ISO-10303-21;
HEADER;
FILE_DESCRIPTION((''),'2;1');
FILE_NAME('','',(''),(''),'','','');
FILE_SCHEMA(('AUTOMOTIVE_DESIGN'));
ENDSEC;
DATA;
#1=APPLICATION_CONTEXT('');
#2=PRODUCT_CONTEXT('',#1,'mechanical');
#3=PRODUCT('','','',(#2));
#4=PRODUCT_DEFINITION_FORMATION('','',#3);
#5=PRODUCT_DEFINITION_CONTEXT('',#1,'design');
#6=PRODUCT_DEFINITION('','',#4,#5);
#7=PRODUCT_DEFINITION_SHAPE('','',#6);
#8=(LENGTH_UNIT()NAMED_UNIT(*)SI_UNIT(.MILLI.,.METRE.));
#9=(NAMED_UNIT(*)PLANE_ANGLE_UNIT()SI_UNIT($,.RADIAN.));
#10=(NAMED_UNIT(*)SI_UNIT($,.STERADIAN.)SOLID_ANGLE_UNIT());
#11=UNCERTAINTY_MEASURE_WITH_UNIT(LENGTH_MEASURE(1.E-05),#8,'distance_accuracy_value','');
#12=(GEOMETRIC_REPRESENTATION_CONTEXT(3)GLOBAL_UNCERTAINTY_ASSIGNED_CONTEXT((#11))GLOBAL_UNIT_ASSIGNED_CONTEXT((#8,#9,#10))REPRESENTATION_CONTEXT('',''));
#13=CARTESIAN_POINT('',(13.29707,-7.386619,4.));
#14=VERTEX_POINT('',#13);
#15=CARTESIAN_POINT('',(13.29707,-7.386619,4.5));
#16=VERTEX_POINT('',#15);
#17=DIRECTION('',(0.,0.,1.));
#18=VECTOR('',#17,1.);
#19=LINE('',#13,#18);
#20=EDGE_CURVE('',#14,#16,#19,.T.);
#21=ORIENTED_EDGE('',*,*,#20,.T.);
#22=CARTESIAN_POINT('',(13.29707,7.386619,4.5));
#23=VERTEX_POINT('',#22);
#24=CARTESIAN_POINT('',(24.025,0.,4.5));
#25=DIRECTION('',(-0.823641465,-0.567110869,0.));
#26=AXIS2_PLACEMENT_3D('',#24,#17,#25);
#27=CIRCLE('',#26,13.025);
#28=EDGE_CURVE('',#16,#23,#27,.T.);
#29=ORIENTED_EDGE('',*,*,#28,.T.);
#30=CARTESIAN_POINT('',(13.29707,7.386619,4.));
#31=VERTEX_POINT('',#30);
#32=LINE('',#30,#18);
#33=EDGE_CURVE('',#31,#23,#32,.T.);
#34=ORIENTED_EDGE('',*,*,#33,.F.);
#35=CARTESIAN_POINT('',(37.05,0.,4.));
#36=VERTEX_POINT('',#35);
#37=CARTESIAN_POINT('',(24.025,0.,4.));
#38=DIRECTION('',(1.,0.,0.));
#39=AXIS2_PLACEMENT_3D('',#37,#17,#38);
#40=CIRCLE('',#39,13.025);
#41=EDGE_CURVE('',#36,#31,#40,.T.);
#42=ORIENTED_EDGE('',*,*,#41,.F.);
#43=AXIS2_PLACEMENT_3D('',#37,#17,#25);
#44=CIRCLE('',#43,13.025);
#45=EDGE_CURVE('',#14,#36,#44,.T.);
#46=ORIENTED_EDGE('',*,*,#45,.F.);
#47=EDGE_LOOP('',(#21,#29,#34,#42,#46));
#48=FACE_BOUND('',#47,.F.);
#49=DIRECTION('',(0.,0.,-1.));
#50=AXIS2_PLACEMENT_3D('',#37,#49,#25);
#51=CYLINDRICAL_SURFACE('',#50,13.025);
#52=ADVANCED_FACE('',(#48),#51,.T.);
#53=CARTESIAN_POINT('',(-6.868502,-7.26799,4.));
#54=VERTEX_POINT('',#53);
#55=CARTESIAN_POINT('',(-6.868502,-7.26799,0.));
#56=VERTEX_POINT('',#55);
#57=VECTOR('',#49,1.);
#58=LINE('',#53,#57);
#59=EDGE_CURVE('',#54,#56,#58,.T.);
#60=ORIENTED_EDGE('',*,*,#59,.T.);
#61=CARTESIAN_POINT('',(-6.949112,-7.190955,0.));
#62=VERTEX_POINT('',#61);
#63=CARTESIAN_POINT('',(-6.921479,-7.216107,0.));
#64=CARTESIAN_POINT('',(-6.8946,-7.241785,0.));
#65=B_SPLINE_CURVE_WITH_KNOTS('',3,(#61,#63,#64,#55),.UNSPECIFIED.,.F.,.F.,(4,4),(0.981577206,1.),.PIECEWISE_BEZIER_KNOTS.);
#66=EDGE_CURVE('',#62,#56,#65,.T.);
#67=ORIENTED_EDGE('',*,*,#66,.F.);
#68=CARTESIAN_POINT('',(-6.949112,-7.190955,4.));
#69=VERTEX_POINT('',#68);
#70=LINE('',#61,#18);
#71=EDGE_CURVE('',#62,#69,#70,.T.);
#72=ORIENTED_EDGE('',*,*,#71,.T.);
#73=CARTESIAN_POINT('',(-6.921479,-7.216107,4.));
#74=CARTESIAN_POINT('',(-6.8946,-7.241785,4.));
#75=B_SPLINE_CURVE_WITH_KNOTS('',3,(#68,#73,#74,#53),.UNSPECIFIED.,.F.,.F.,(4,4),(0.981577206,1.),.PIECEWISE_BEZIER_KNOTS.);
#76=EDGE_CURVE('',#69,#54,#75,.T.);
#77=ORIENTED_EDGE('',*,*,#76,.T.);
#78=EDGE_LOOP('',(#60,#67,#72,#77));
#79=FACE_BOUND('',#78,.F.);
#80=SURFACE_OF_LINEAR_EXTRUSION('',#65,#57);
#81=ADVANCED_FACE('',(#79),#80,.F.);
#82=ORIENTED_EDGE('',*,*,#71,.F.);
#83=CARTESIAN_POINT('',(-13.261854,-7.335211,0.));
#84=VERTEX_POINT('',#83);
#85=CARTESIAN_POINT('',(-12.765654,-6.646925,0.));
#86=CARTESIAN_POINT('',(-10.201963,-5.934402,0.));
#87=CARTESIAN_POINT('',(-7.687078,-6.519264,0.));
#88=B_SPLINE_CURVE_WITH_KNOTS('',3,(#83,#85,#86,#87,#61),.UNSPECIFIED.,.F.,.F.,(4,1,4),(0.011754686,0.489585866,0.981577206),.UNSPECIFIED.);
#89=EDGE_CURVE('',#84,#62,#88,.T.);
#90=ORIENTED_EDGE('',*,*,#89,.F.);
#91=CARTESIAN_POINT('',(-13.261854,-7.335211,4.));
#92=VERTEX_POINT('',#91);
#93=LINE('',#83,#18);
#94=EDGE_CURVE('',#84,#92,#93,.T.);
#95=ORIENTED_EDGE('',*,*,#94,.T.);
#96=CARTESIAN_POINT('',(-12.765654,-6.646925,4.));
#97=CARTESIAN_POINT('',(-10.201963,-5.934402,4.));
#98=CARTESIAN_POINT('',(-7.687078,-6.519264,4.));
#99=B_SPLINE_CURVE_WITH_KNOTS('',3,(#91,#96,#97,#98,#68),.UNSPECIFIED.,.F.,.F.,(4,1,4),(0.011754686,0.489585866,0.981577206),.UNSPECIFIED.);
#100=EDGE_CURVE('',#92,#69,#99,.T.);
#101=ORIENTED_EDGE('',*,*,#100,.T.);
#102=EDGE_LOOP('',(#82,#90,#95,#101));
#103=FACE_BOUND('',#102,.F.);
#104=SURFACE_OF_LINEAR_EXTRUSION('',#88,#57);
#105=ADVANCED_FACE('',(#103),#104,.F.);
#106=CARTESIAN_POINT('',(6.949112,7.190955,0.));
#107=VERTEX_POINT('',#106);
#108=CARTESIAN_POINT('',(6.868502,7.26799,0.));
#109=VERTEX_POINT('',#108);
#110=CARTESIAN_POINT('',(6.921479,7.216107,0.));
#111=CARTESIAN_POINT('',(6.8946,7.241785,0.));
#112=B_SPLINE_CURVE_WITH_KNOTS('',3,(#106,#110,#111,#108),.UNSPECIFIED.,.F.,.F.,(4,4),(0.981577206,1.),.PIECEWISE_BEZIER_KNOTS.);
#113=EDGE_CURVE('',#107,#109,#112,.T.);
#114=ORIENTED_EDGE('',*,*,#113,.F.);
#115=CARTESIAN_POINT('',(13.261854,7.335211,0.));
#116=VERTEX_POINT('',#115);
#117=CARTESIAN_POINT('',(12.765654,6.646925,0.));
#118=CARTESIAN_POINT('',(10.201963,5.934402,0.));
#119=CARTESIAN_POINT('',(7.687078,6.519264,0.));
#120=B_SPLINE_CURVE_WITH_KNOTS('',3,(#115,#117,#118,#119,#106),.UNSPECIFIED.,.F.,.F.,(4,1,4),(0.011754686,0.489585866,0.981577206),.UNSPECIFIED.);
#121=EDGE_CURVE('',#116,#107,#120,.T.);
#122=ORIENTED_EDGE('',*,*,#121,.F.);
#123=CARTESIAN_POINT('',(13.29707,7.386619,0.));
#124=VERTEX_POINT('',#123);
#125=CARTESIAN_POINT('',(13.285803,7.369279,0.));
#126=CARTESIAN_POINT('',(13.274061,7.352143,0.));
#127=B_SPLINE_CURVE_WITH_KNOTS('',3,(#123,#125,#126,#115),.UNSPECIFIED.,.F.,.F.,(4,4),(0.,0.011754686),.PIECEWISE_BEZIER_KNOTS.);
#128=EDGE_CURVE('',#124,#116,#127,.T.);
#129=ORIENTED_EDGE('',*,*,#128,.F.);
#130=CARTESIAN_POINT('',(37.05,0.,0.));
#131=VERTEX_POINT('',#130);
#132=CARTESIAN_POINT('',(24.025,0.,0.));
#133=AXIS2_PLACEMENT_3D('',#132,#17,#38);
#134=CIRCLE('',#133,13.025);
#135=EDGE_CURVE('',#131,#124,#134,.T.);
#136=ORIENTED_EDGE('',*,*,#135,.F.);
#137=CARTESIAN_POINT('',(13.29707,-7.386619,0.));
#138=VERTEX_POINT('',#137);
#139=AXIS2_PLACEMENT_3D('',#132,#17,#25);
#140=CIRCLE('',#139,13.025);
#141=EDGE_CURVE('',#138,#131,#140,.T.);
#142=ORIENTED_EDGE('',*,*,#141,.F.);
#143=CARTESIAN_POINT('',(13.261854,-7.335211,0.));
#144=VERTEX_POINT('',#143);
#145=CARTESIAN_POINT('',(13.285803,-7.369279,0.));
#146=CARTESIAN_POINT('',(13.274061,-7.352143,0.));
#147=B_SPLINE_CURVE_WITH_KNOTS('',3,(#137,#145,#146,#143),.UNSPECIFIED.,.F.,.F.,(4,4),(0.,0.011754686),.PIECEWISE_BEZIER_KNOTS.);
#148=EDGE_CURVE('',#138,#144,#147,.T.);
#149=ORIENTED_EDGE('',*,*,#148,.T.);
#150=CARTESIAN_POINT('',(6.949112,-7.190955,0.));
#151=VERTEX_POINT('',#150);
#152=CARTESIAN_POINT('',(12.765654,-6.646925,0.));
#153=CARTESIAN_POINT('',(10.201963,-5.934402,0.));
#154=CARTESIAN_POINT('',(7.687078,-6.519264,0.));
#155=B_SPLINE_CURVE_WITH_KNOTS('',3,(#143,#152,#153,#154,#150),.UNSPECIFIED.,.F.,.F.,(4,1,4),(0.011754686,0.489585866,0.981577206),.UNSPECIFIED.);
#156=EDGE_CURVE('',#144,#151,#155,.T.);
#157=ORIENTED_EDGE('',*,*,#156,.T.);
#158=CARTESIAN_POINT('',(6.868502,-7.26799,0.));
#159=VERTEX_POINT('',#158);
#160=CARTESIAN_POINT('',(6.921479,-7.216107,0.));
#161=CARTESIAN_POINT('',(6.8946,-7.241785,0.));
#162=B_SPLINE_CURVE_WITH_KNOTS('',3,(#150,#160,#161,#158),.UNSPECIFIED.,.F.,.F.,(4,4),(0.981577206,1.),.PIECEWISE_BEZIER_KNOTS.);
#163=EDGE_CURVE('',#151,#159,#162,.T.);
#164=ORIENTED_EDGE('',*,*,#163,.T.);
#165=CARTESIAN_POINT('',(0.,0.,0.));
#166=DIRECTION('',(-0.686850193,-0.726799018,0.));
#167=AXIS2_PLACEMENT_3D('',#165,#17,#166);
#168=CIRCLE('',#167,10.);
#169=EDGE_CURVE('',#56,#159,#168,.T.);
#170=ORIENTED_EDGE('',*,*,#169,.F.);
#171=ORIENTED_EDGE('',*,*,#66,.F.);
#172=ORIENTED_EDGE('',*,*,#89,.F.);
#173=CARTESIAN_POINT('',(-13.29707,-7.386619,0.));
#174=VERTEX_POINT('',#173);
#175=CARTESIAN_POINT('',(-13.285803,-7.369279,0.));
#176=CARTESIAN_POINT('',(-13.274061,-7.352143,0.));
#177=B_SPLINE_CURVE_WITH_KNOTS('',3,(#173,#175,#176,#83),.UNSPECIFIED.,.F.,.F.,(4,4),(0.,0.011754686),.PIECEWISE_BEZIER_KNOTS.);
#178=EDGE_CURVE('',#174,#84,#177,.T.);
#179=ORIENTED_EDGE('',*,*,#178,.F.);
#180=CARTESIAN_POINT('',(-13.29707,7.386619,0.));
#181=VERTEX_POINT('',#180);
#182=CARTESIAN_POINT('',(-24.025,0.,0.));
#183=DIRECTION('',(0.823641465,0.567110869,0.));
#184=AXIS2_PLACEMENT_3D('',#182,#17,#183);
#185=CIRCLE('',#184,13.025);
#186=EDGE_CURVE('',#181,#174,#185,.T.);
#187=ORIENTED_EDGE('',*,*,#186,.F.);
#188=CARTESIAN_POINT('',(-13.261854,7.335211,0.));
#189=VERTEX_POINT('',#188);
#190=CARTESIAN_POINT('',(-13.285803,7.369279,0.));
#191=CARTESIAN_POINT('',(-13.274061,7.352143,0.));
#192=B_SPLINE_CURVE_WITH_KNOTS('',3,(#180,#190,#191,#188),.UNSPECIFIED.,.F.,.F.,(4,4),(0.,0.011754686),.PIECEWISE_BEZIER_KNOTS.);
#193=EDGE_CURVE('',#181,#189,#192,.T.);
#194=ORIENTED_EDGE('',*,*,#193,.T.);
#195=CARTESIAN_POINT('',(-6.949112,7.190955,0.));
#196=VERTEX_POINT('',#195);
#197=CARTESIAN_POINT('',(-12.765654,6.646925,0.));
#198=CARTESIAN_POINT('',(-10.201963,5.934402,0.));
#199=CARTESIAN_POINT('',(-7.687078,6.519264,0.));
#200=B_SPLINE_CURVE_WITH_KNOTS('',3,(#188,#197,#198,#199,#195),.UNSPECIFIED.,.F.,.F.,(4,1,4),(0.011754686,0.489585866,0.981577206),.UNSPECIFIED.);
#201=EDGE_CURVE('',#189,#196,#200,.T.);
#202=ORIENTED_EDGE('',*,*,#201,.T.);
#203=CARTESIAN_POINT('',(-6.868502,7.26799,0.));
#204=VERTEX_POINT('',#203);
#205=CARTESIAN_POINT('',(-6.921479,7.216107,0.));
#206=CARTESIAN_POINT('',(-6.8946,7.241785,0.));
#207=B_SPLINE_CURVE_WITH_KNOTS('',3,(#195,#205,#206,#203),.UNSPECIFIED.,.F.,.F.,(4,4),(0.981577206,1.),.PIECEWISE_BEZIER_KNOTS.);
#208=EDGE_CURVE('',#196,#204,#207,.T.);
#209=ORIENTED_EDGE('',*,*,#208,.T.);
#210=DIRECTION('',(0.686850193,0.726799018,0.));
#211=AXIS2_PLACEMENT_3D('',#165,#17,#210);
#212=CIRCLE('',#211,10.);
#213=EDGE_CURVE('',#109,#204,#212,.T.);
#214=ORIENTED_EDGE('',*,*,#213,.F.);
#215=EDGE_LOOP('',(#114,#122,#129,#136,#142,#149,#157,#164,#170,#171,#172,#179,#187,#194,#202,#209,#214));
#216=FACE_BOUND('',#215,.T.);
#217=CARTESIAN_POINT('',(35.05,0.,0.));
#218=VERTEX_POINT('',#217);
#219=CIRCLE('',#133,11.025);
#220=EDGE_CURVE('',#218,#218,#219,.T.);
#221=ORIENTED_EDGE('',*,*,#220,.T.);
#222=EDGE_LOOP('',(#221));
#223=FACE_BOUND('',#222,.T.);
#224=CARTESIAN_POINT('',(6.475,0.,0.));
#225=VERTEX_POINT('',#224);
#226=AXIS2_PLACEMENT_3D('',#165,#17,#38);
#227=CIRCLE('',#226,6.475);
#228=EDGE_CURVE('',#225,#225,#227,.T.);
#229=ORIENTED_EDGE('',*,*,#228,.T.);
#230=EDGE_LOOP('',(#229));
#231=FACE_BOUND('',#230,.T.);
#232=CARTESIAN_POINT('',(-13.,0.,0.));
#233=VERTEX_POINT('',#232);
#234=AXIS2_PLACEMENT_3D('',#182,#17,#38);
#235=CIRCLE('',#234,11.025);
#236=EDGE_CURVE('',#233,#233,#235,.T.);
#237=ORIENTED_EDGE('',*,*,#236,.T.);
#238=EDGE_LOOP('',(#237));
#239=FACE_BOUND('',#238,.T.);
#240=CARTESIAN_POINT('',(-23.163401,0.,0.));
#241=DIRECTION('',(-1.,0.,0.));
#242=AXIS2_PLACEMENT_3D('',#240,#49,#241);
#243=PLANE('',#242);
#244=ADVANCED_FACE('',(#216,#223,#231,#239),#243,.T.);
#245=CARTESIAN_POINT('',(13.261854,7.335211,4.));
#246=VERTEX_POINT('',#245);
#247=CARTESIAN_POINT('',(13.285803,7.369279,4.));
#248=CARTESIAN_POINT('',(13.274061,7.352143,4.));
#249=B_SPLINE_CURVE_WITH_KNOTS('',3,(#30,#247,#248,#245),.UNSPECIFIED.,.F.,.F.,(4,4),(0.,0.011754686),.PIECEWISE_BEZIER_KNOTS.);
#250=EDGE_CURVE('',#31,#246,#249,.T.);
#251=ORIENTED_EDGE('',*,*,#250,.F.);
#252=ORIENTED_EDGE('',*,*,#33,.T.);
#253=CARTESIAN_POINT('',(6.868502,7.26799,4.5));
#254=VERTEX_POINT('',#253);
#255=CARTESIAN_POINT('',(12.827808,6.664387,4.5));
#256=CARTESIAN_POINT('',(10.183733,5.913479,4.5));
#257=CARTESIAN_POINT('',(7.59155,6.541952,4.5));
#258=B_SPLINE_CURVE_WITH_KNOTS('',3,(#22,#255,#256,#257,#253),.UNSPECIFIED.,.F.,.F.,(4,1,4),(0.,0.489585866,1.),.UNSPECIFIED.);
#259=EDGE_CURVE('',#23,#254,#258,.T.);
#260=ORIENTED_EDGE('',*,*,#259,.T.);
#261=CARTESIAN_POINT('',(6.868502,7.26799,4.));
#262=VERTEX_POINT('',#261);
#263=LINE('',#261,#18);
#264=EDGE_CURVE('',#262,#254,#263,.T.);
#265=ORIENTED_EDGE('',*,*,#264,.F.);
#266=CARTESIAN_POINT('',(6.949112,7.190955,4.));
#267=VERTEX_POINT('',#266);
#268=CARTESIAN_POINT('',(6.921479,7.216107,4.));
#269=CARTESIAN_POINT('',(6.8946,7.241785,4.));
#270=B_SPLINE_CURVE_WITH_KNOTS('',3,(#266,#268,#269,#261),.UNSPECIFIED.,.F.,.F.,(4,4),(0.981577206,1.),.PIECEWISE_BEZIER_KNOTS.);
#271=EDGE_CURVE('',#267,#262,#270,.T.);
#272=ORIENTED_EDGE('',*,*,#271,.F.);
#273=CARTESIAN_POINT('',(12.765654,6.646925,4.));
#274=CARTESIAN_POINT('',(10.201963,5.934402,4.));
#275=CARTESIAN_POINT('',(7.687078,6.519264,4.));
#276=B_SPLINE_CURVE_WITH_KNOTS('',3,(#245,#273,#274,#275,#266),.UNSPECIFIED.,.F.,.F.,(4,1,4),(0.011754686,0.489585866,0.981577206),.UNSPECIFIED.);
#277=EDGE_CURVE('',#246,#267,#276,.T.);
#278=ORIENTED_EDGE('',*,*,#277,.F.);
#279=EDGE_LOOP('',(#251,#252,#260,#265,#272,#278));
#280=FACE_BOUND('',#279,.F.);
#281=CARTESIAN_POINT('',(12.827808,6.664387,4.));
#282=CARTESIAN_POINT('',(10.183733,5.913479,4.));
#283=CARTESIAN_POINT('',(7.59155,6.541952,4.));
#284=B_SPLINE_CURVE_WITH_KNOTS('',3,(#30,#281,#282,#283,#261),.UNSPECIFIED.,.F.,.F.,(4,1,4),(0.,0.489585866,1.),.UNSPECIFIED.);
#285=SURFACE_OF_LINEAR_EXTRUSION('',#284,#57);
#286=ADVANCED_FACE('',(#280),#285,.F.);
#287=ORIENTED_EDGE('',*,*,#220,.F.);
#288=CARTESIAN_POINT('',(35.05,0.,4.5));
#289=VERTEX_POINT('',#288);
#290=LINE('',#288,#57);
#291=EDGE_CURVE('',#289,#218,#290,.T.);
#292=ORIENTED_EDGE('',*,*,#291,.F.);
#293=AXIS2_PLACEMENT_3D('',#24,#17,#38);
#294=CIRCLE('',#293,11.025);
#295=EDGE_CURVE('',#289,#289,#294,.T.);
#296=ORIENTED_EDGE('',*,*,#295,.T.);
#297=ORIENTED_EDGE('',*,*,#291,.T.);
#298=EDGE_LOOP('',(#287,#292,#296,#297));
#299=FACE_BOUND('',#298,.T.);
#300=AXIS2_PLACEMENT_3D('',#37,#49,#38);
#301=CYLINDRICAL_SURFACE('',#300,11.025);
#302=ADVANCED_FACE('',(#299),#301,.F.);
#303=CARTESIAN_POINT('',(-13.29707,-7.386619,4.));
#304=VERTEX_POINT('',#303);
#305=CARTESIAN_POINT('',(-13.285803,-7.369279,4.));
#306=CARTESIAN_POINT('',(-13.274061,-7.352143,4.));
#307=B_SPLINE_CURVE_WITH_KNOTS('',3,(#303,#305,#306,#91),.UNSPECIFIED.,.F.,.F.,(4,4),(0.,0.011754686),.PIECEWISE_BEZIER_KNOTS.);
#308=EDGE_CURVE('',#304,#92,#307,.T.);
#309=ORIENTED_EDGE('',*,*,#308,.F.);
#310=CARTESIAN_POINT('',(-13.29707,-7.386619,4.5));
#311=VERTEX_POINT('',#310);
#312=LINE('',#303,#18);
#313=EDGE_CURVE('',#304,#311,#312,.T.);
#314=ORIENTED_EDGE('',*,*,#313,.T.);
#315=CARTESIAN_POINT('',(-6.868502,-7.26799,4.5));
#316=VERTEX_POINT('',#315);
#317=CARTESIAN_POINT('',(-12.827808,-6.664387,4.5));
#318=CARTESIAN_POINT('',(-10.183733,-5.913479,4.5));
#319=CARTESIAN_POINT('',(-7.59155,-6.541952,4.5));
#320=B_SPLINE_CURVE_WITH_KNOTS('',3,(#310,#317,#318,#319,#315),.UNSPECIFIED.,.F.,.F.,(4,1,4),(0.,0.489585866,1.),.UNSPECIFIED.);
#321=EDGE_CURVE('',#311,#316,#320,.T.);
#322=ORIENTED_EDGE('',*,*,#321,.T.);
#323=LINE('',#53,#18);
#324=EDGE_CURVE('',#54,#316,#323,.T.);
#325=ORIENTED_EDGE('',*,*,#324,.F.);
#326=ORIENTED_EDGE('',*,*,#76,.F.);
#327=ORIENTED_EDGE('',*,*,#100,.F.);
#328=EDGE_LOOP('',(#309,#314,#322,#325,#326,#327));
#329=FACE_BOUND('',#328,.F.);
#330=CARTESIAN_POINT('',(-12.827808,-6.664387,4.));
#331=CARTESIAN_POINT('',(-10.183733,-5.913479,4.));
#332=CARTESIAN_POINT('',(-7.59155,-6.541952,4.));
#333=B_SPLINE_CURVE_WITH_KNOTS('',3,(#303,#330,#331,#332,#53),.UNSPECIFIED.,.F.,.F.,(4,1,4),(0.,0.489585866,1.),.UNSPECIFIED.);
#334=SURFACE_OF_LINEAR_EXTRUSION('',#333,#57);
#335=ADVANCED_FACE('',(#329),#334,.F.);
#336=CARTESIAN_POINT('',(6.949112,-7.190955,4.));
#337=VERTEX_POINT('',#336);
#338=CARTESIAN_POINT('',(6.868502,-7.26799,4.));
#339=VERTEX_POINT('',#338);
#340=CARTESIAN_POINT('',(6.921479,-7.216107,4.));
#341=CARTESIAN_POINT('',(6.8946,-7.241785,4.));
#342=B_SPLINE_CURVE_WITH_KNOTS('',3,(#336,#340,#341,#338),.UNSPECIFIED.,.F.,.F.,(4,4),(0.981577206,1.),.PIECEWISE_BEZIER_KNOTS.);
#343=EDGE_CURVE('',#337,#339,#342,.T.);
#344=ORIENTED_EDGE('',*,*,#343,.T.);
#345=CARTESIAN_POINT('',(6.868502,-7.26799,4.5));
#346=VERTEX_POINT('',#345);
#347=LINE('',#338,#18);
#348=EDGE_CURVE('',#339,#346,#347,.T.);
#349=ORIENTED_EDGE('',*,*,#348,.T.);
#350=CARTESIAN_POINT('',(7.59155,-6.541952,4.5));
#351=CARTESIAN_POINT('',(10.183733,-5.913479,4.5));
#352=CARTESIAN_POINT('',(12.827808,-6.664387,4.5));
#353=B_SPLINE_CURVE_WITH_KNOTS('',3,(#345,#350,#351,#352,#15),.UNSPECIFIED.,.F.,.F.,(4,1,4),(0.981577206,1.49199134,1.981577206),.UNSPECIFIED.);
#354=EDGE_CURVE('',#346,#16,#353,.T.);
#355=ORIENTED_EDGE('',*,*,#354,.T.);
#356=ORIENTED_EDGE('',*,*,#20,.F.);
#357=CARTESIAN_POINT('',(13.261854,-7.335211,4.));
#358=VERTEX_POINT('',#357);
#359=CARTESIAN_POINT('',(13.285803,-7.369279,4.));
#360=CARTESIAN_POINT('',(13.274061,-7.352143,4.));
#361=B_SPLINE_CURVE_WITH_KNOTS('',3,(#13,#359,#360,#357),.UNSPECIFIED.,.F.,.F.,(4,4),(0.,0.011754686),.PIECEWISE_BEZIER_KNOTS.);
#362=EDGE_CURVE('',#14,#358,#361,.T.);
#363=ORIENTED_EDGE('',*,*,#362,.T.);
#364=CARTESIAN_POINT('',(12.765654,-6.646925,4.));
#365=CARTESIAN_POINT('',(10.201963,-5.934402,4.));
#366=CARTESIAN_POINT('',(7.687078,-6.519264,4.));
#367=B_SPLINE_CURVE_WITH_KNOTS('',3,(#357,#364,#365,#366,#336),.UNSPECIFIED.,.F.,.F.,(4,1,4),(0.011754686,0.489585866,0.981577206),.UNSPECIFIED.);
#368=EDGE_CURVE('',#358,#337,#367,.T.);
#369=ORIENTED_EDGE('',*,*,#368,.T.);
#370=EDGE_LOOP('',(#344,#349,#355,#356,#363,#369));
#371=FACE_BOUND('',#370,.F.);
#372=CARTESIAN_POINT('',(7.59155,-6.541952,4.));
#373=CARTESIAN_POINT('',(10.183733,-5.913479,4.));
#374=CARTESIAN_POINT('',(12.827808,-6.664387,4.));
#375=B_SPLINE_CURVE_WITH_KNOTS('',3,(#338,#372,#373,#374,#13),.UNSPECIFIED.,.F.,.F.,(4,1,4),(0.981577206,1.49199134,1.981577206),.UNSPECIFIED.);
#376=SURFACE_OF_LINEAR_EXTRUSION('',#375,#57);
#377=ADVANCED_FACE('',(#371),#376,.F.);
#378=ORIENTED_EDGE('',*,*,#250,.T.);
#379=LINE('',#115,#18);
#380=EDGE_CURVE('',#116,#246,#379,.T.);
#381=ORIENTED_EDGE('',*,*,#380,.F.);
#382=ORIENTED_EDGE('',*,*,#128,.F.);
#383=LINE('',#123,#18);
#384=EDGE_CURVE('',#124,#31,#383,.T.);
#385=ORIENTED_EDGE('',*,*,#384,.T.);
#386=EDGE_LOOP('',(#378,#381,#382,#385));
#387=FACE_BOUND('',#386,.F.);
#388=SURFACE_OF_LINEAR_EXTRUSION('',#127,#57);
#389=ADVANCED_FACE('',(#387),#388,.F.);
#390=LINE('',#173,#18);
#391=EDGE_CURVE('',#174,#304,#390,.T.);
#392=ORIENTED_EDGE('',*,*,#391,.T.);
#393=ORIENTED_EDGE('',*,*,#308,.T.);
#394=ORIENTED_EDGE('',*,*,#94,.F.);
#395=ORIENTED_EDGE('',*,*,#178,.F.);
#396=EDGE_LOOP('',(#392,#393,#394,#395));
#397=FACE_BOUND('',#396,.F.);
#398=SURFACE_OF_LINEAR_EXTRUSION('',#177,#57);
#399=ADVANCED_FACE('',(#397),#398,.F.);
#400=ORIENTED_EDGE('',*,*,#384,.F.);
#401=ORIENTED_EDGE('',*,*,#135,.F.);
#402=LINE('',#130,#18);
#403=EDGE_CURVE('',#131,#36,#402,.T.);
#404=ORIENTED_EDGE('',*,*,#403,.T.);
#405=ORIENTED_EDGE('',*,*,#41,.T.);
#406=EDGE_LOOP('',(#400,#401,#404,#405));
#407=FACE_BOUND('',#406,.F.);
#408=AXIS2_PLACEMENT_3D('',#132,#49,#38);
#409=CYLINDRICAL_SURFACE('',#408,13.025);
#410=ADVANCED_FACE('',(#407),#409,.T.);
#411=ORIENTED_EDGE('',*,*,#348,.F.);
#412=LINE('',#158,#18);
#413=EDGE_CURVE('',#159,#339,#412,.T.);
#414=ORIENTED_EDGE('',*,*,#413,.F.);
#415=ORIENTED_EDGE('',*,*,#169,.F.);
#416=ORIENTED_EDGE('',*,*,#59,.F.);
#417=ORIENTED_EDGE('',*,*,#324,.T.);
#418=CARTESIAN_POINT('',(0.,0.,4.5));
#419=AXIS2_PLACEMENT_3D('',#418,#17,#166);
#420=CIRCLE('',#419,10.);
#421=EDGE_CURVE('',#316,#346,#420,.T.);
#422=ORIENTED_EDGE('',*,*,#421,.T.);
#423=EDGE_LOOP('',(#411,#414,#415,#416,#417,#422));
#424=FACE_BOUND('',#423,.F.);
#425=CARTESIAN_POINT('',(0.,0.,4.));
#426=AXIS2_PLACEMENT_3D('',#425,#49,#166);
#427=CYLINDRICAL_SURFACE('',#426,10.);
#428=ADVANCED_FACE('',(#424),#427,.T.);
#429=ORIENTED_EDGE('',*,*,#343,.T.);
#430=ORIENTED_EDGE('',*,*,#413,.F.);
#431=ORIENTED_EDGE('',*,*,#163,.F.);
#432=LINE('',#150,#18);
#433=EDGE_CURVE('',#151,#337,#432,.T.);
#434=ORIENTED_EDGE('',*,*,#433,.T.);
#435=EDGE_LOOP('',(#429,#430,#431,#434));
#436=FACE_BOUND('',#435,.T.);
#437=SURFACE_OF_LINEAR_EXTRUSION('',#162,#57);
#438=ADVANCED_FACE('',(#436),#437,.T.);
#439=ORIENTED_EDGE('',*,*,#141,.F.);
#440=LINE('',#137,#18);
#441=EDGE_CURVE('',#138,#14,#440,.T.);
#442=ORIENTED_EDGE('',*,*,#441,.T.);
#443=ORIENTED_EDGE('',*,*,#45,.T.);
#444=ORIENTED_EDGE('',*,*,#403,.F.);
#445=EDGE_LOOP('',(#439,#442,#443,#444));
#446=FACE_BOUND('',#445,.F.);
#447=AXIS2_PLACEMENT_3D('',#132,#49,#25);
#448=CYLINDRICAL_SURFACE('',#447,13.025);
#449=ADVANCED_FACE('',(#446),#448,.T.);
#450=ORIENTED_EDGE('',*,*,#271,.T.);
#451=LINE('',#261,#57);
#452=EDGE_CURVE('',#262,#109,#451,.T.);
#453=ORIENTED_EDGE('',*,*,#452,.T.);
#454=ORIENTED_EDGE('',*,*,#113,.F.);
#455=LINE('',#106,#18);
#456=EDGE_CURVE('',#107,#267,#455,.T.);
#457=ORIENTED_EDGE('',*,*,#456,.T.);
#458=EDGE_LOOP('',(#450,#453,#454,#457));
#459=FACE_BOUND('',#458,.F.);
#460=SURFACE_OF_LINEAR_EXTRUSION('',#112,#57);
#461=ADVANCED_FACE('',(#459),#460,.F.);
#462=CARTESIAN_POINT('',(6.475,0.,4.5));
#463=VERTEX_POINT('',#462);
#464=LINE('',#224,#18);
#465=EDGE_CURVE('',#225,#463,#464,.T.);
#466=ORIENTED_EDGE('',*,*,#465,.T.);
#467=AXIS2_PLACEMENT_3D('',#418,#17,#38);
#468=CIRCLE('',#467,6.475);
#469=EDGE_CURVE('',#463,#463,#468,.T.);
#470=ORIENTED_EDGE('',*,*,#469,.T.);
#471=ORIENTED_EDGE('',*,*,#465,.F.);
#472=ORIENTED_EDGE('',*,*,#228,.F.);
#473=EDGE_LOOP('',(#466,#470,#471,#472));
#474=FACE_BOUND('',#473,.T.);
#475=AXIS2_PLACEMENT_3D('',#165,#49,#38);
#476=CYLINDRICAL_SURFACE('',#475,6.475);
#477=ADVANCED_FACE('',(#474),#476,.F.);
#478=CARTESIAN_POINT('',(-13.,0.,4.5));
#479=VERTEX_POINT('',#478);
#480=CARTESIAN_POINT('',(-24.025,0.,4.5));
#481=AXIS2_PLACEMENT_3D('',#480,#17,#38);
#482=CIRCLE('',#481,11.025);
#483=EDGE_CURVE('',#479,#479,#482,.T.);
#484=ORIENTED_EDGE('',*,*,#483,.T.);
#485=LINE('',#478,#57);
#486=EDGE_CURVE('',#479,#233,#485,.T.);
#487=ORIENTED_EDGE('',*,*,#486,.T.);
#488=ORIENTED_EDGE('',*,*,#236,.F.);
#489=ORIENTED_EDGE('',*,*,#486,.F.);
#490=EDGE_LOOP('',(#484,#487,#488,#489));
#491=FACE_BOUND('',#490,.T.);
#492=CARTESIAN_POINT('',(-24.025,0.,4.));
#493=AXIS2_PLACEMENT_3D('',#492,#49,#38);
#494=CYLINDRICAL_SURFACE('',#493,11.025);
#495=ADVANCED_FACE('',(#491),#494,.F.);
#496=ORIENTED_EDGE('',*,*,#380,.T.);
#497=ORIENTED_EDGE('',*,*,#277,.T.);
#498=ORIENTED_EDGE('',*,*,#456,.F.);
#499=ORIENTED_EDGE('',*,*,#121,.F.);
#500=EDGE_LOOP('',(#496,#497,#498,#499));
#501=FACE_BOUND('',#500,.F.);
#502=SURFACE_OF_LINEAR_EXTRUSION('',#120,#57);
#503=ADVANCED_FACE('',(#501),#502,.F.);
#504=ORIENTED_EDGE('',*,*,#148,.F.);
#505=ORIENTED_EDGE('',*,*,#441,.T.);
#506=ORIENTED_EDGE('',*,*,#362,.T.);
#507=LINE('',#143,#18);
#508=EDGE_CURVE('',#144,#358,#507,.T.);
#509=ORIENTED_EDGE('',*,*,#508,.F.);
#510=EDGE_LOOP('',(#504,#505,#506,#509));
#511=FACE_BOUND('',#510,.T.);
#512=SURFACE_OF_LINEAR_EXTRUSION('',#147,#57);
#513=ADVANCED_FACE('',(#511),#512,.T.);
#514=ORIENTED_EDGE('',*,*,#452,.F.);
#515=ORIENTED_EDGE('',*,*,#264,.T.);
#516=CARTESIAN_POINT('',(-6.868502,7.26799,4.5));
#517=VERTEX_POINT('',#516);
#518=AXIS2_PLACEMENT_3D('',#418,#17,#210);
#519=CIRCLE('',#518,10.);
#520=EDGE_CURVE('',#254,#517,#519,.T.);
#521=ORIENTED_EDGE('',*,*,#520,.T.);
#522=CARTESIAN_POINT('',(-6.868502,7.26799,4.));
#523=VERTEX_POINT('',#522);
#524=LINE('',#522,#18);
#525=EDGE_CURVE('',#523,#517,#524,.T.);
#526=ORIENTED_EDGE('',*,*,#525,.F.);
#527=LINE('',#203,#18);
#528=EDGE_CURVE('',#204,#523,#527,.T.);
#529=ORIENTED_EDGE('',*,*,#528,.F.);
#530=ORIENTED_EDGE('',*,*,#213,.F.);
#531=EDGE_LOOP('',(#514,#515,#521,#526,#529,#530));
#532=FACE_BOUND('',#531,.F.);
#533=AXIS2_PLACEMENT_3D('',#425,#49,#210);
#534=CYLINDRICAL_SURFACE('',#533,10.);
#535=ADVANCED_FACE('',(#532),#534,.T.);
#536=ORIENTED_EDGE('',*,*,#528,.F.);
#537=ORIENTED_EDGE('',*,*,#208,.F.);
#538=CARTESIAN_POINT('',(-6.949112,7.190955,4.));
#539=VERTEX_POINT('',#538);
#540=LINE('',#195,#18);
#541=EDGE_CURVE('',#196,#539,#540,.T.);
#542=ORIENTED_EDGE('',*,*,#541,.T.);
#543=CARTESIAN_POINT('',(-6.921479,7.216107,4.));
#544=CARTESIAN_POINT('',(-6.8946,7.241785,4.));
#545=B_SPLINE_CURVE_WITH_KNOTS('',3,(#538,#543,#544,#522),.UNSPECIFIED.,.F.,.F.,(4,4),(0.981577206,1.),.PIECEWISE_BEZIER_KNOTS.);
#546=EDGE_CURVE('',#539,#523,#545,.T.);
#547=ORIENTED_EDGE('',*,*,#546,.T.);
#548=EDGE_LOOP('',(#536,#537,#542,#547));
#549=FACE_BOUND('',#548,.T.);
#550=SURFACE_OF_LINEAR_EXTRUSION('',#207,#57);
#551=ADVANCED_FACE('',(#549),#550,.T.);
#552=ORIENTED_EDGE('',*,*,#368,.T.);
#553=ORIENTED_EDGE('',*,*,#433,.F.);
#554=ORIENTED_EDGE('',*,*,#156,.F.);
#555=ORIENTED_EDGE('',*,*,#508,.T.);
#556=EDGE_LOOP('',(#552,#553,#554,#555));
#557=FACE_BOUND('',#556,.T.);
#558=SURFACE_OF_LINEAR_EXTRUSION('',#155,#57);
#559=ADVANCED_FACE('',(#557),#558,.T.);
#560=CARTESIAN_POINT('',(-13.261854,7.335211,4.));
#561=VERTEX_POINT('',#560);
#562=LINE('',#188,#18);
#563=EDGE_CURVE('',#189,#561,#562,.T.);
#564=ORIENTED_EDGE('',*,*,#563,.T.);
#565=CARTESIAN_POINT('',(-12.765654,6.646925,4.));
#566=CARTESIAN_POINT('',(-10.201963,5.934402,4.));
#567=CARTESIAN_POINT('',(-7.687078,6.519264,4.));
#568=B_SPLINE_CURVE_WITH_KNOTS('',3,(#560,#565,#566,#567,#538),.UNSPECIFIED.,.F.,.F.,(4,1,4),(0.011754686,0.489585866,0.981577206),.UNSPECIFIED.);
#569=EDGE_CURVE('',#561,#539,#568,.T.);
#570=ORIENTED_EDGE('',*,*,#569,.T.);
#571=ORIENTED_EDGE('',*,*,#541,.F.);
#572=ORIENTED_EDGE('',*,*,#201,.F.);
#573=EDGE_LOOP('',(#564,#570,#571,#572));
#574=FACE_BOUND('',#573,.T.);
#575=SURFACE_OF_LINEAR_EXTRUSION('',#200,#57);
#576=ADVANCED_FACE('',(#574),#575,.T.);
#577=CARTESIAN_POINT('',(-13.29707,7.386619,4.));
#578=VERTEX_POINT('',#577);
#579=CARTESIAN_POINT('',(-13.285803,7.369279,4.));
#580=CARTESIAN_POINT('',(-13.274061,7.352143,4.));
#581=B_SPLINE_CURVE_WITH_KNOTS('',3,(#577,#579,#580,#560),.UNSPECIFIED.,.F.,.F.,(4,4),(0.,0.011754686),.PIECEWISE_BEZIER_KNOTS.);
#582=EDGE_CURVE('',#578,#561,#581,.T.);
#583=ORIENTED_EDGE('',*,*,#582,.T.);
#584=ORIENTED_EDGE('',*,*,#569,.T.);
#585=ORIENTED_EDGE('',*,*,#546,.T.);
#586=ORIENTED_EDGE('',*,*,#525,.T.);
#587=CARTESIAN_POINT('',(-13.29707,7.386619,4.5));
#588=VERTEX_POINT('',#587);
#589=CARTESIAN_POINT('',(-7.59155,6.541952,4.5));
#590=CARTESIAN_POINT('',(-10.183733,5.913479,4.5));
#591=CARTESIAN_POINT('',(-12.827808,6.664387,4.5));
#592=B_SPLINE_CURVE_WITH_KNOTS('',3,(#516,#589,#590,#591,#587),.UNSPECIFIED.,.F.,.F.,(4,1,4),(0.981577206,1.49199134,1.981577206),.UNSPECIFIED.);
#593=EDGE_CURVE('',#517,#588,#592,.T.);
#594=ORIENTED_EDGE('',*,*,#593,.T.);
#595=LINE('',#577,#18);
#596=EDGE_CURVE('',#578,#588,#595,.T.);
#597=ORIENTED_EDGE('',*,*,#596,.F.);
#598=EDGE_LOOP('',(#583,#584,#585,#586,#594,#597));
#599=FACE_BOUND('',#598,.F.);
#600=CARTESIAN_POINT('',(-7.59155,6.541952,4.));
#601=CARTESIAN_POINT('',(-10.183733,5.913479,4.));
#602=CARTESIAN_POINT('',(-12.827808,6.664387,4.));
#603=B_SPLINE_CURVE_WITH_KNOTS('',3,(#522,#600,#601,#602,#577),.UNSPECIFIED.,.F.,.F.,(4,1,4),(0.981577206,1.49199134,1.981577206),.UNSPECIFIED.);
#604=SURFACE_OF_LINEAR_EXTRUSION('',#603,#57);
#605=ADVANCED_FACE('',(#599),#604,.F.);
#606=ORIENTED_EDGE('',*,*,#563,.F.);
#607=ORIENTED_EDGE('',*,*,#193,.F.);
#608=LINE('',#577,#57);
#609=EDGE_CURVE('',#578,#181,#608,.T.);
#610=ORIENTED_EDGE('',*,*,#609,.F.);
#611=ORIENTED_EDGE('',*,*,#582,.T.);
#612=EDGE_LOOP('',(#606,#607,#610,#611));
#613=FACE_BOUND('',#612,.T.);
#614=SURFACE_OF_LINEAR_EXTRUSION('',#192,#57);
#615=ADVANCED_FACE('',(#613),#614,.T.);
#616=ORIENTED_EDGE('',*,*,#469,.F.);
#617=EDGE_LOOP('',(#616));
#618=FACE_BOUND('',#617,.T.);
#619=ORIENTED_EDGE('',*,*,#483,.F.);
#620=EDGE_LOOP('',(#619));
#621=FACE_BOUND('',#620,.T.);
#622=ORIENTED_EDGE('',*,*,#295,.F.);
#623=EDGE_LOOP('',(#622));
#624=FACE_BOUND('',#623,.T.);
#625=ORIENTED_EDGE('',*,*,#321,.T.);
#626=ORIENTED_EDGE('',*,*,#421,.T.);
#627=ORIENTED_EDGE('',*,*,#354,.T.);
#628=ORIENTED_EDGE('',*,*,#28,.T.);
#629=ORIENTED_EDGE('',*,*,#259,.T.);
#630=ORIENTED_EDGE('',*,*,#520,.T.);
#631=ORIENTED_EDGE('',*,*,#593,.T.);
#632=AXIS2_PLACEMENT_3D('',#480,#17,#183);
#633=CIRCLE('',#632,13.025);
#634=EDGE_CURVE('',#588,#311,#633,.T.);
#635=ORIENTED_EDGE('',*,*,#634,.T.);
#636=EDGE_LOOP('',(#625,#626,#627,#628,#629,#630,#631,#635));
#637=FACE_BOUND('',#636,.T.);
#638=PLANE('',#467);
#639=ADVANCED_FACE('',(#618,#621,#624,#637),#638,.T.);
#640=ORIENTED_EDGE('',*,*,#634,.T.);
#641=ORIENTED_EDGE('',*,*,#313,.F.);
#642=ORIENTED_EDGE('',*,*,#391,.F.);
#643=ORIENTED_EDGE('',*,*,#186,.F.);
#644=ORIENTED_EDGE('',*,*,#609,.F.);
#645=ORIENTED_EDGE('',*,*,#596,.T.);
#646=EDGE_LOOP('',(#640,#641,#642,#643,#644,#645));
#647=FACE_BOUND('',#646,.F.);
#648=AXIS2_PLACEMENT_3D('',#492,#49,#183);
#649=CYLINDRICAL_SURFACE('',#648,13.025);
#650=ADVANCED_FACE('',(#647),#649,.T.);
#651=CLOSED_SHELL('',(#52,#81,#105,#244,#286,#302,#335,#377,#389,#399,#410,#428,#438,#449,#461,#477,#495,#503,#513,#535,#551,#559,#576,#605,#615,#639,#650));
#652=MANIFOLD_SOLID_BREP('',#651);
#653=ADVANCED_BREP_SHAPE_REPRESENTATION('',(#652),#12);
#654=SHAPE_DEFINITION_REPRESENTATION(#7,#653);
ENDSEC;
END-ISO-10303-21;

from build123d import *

# Parameters (mm, degrees)
F0_R        = 11.025
F0_R_2      = 8
F0_R_3      = 6.475
F1_DEPTH    = 4
F2_DEPTH    = 4.5
F1_FACE_R   = 11.025
F1_FACE_R_2 = 8
F3_DEPTH    = 0.5


# Not quite as in the source:
# - a feature names something its author has since deleted; it is built from what else it names


with BuildPart() as f1:
    # F0 (on Top) → F1 (new body)
    with BuildSketch(Plane.XY):
        with BuildLine():
            add(Edge.make_bspline(
                [(-13.2970699227, 7.3866190681), (-13.2858031983, 7.3692786835), (-13.2740607617, 7.352142708), (-13.2618542065, 7.3352108101)],
                knots=[0, 0, 0, 0, 0.0117546856, 0.0117546856, 0.0117546856, 0.0117546856], degree=3))
            ThreePointArc((-13.2970699227, 7.3866190681), (-37.05, 0), (-13.2970699227, -7.3866190681))
            add(Edge.make_bspline(
                [(-13.2970699227, -7.3866190681), (-13.2858031983, -7.3692786835), (-13.2740607617, -7.352142708), (-13.2618542065, -7.3352108101)],
                knots=[0, 0, 0, 0, 0.0117546856, 0.0117546856, 0.0117546856, 0.0117546856], degree=3))
            ThreePointArc((-13.2618542065, -7.3352108101), (-11.5783016635, -3.8380106201), (-11, 0))
            ThreePointArc((-11, 0), (-11.5783016635, 3.8380106201), (-13.2618542065, 7.3352108101))
        make_face()
        with Locations((-24.025, 0)):
            Circle(F0_R, mode=Mode.SUBTRACT)
        with BuildLine():
            add(Edge.make_bspline(
                [(13.2970699227, 7.3866190681), (13.2858031983, 7.3692786835), (13.2740607617, 7.352142708), (13.2618542065, 7.3352108101)],
                knots=[0, 0, 0, 0, 0.0117546856, 0.0117546856, 0.0117546856, 0.0117546856], degree=3))
            ThreePointArc((13.2618542065, 7.3352108101), (11, 0), (13.2618542065, -7.3352108101))
            add(Edge.make_bspline(
                [(13.2970699227, -7.3866190681), (13.2858031983, -7.3692786835), (13.2740607617, -7.352142708), (13.2618542065, -7.3352108101)],
                knots=[0, 0, 0, 0, 0.0117546856, 0.0117546856, 0.0117546856, 0.0117546856], degree=3))
            ThreePointArc((13.2970699227, -7.3866190681), (27.8927729861, -12.4374819448), (37.05, 0))
            ThreePointArc((37.05, 0), (27.8927729861, 12.4374819448), (13.2970699227, 7.3866190681))
        make_face()
        with Locations((24.025, 0)):
            Circle(F0_R, mode=Mode.SUBTRACT)
        with BuildLine():
            add(Edge.make_bspline(
                [(-6.9491121946, 7.1909554099), (-6.9214787847, 7.2161071506), (-6.8945995038, 7.2417846871), (-6.8685019311, 7.2679901776)],
                knots=[0.9815772058, 0.9815772058, 0.9815772058, 0.9815772058, 1, 1, 1, 1], degree=3))
            ThreePointArc((-6.9491121946, 7.1909554099), (-10, 0), (-6.9491121946, -7.1909554099))
            add(Edge.make_bspline(
                [(-6.9491121946, -7.1909554099), (-6.9214787847, -7.2161071506), (-6.8945995038, -7.2417846871), (-6.8685019311, -7.2679901776)],
                knots=[0.9815772058, 0.9815772058, 0.9815772058, 0.9815772058, 1, 1, 1, 1], degree=3))
            ThreePointArc((-6.8685019311, -7.2679901776), (0, -10), (6.8685019311, -7.2679901776))
            add(Edge.make_bspline(
                [(6.9491121946, -7.1909554099), (6.9214787847, -7.2161071506), (6.8945995038, -7.2417846871), (6.8685019311, -7.2679901776)],
                knots=[0.9815772058, 0.9815772058, 0.9815772058, 0.9815772058, 1, 1, 1, 1], degree=3))
            ThreePointArc((6.9491121946, -7.1909554099), (9.2057352217, -3.9056931558), (10, 0))
            ThreePointArc((10, 0), (9.2057352217, 3.9056931558), (6.9491121946, 7.1909554099))
            add(Edge.make_bspline(
                [(6.9491121946, 7.1909554099), (6.9214787847, 7.2161071506), (6.8945995038, 7.2417846871), (6.8685019311, 7.2679901776)],
                knots=[0.9815772058, 0.9815772058, 0.9815772058, 0.9815772058, 1, 1, 1, 1], degree=3))
            ThreePointArc((6.8685019311, 7.2679901776), (0, 10), (-6.8685019311, 7.2679901776))
        make_face()
        Circle(F0_R_2, mode=Mode.SUBTRACT)
        Circle(F0_R_2)
        Circle(F0_R_3, mode=Mode.SUBTRACT)
        with BuildLine():
            add(Edge.make_bspline(
                [(-13.2618542065, 7.3352108101), (-12.765654406, 6.6469245328), (-10.2019626219, 5.934402015), (-7.687078337, 6.5192636743), (-6.9491121946, 7.1909554099)],
                knots=[0.0117546856, 0.0117546856, 0.0117546856, 0.0117546856, 0.4895858662, 0.9815772058, 0.9815772058, 0.9815772058, 0.9815772058], degree=3))
            ThreePointArc((-13.2618542065, 7.3352108101), (-11.5783016635, 3.8380106201), (-11, 0))
            ThreePointArc((-11, 0), (-11.5783016635, -3.8380106201), (-13.2618542065, -7.3352108101))
            add(Edge.make_bspline(
                [(-13.2618542065, -7.3352108101), (-12.765654406, -6.6469245328), (-10.2019626219, -5.934402015), (-7.687078337, -6.5192636743), (-6.9491121946, -7.1909554099)],
                knots=[0.0117546856, 0.0117546856, 0.0117546856, 0.0117546856, 0.4895858662, 0.9815772058, 0.9815772058, 0.9815772058, 0.9815772058], degree=3))
            ThreePointArc((-6.9491121946, -7.1909554099), (-10, 0), (-6.9491121946, 7.1909554099))
        make_face()
        with BuildLine():
            add(Edge.make_bspline(
                [(13.2618542065, 7.3352108101), (12.765654406, 6.6469245328), (10.2019626219, 5.934402015), (7.687078337, 6.5192636743), (6.9491121946, 7.1909554099)],
                knots=[0.0117546856, 0.0117546856, 0.0117546856, 0.0117546856, 0.4895858662, 0.9815772058, 0.9815772058, 0.9815772058, 0.9815772058], degree=3))
            ThreePointArc((6.9491121946, 7.1909554099), (9.2057352217, 3.9056931558), (10, 0))
            ThreePointArc((10, 0), (9.2057352217, -3.9056931558), (6.9491121946, -7.1909554099))
            add(Edge.make_bspline(
                [(13.2618542065, -7.3352108101), (12.765654406, -6.6469245328), (10.2019626219, -5.934402015), (7.687078337, -6.5192636743), (6.9491121946, -7.1909554099)],
                knots=[0.0117546856, 0.0117546856, 0.0117546856, 0.0117546856, 0.4895858662, 0.9815772058, 0.9815772058, 0.9815772058, 0.9815772058], degree=3))
            ThreePointArc((13.2618542065, -7.3352108101), (11, 0), (13.2618542065, 7.3352108101))
        make_face()
    extrude(amount=F1_DEPTH)

    # F0 (on Top) → F2 (join)
    with BuildSketch(Plane.XY):
        Circle(F0_R_2)
        Circle(F0_R_3, mode=Mode.SUBTRACT)
    extrude(amount=F2_DEPTH)

    # F1_face (on face) + F0 (on Top) → F3 (join, through all)
    with BuildSketch(Plane.XY.offset(4)):
        with BuildLine():
            ThreePointArc((-6.8685019311, -7.2679901776), (0, -10), (6.8685019311, -7.2679901776))
            add(Edge.make_bspline(
                [(6.8685019311, -7.2679901776), (7.591550229, -6.5419519543), (10.1837329047, -5.9134794065), (12.8278077735, -6.6643873129), (13.2970699227, -7.3866190681)],
                knots=[0.9815772058, 0.9815772058, 0.9815772058, 0.9815772058, 1.4919913396, 1.9815772058, 1.9815772058, 1.9815772058, 1.9815772058], degree=3))
            ThreePointArc((13.2970699227, -7.3866190681), (37.05, 0), (13.2970699227, 7.3866190681))
            add(Edge.make_bspline(
                [(13.2970699227, 7.3866190681), (12.8278077735, 6.6643873129), (10.1837329047, 5.9134794065), (7.591550229, 6.5419519543), (6.8685019311, 7.2679901776)],
                knots=[0, 0, 0, 0, 0.4895858662, 1, 1, 1, 1], degree=3))
            ThreePointArc((6.8685019311, 7.2679901776), (0, 10), (-6.8685019311, 7.2679901776))
            add(Edge.make_bspline(
                [(-6.8685019311, 7.2679901776), (-7.591550229, 6.5419519543), (-10.1837329047, 5.9134794066), (-12.8278077735, 6.6643873129), (-13.2970699227, 7.3866190681)],
                knots=[0.9815772058, 0.9815772058, 0.9815772058, 0.9815772058, 1.4919913396, 1.9815772058, 1.9815772058, 1.9815772058, 1.9815772058], degree=3))
            ThreePointArc((-13.2970699227, 7.3866190681), (-37.05, 0), (-13.2970699227, -7.3866190681))
            add(Edge.make_bspline(
                [(-13.2970699227, -7.3866190681), (-12.8278077735, -6.6643873129), (-10.1837329047, -5.9134794065), (-7.591550229, -6.5419519543), (-6.8685019311, -7.2679901776)],
                knots=[0, 0, 0, 0, 0.4895858662, 1, 1, 1, 1], degree=3))
        make_face()
        with Locations((-24.025, 0)):
            Circle(F1_FACE_R, mode=Mode.SUBTRACT)
        Circle(F1_FACE_R_2, mode=Mode.SUBTRACT)
        with Locations((24.025, 0)):
            Circle(F1_FACE_R, mode=Mode.SUBTRACT)
    with BuildSketch(Plane.XY):
        with BuildLine():
            add(Edge.make_bspline(
                [(-13.2970699227, 7.3866190681), (-13.2858031983, 7.3692786835), (-13.2740607617, 7.352142708), (-13.2618542065, 7.3352108101)],
                knots=[0, 0, 0, 0, 0.0117546856, 0.0117546856, 0.0117546856, 0.0117546856], degree=3))
            ThreePointArc((-13.2970699227, 7.3866190681), (-37.05, 0), (-13.2970699227, -7.3866190681))
            add(Edge.make_bspline(
                [(-13.2970699227, -7.3866190681), (-13.2858031983, -7.3692786835), (-13.2740607617, -7.352142708), (-13.2618542065, -7.3352108101)],
                knots=[0, 0, 0, 0, 0.0117546856, 0.0117546856, 0.0117546856, 0.0117546856], degree=3))
            ThreePointArc((-13.2618542065, -7.3352108101), (-11.5783016635, -3.8380106201), (-11, 0))
            ThreePointArc((-11, 0), (-11.5783016635, 3.8380106201), (-13.2618542065, 7.3352108101))
        make_face()
        with Locations((-24.025, 0)):
            Circle(F0_R, mode=Mode.SUBTRACT)
        with BuildLine():
            add(Edge.make_bspline(
                [(-13.2618542065, 7.3352108101), (-12.765654406, 6.6469245328), (-10.2019626219, 5.934402015), (-7.687078337, 6.5192636743), (-6.9491121946, 7.1909554099)],
                knots=[0.0117546856, 0.0117546856, 0.0117546856, 0.0117546856, 0.4895858662, 0.9815772058, 0.9815772058, 0.9815772058, 0.9815772058], degree=3))
            ThreePointArc((-13.2618542065, 7.3352108101), (-11.5783016635, 3.8380106201), (-11, 0))
            ThreePointArc((-11, 0), (-11.5783016635, -3.8380106201), (-13.2618542065, -7.3352108101))
            add(Edge.make_bspline(
                [(-13.2618542065, -7.3352108101), (-12.765654406, -6.6469245328), (-10.2019626219, -5.934402015), (-7.687078337, -6.5192636743), (-6.9491121946, -7.1909554099)],
                knots=[0.0117546856, 0.0117546856, 0.0117546856, 0.0117546856, 0.4895858662, 0.9815772058, 0.9815772058, 0.9815772058, 0.9815772058], degree=3))
            ThreePointArc((-6.9491121946, -7.1909554099), (-10, 0), (-6.9491121946, 7.1909554099))
        make_face()
        with BuildLine():
            add(Edge.make_bspline(
                [(-6.9491121946, 7.1909554099), (-6.9214787847, 7.2161071506), (-6.8945995038, 7.2417846871), (-6.8685019311, 7.2679901776)],
                knots=[0.9815772058, 0.9815772058, 0.9815772058, 0.9815772058, 1, 1, 1, 1], degree=3))
            ThreePointArc((-6.9491121946, 7.1909554099), (-10, 0), (-6.9491121946, -7.1909554099))
            add(Edge.make_bspline(
                [(-6.9491121946, -7.1909554099), (-6.9214787847, -7.2161071506), (-6.8945995038, -7.2417846871), (-6.8685019311, -7.2679901776)],
                knots=[0.9815772058, 0.9815772058, 0.9815772058, 0.9815772058, 1, 1, 1, 1], degree=3))
            ThreePointArc((-6.8685019311, -7.2679901776), (0, -10), (6.8685019311, -7.2679901776))
            add(Edge.make_bspline(
                [(6.9491121946, -7.1909554099), (6.9214787847, -7.2161071506), (6.8945995038, -7.2417846871), (6.8685019311, -7.2679901776)],
                knots=[0.9815772058, 0.9815772058, 0.9815772058, 0.9815772058, 1, 1, 1, 1], degree=3))
            ThreePointArc((6.9491121946, -7.1909554099), (9.2057352217, -3.9056931558), (10, 0))
            ThreePointArc((10, 0), (9.2057352217, 3.9056931558), (6.9491121946, 7.1909554099))
            add(Edge.make_bspline(
                [(6.9491121946, 7.1909554099), (6.9214787847, 7.2161071506), (6.8945995038, 7.2417846871), (6.8685019311, 7.2679901776)],
                knots=[0.9815772058, 0.9815772058, 0.9815772058, 0.9815772058, 1, 1, 1, 1], degree=3))
            ThreePointArc((6.8685019311, 7.2679901776), (0, 10), (-6.8685019311, 7.2679901776))
        make_face()
        Circle(F0_R_2, mode=Mode.SUBTRACT)
    extrude(amount=F3_DEPTH)


solid = f1.part
